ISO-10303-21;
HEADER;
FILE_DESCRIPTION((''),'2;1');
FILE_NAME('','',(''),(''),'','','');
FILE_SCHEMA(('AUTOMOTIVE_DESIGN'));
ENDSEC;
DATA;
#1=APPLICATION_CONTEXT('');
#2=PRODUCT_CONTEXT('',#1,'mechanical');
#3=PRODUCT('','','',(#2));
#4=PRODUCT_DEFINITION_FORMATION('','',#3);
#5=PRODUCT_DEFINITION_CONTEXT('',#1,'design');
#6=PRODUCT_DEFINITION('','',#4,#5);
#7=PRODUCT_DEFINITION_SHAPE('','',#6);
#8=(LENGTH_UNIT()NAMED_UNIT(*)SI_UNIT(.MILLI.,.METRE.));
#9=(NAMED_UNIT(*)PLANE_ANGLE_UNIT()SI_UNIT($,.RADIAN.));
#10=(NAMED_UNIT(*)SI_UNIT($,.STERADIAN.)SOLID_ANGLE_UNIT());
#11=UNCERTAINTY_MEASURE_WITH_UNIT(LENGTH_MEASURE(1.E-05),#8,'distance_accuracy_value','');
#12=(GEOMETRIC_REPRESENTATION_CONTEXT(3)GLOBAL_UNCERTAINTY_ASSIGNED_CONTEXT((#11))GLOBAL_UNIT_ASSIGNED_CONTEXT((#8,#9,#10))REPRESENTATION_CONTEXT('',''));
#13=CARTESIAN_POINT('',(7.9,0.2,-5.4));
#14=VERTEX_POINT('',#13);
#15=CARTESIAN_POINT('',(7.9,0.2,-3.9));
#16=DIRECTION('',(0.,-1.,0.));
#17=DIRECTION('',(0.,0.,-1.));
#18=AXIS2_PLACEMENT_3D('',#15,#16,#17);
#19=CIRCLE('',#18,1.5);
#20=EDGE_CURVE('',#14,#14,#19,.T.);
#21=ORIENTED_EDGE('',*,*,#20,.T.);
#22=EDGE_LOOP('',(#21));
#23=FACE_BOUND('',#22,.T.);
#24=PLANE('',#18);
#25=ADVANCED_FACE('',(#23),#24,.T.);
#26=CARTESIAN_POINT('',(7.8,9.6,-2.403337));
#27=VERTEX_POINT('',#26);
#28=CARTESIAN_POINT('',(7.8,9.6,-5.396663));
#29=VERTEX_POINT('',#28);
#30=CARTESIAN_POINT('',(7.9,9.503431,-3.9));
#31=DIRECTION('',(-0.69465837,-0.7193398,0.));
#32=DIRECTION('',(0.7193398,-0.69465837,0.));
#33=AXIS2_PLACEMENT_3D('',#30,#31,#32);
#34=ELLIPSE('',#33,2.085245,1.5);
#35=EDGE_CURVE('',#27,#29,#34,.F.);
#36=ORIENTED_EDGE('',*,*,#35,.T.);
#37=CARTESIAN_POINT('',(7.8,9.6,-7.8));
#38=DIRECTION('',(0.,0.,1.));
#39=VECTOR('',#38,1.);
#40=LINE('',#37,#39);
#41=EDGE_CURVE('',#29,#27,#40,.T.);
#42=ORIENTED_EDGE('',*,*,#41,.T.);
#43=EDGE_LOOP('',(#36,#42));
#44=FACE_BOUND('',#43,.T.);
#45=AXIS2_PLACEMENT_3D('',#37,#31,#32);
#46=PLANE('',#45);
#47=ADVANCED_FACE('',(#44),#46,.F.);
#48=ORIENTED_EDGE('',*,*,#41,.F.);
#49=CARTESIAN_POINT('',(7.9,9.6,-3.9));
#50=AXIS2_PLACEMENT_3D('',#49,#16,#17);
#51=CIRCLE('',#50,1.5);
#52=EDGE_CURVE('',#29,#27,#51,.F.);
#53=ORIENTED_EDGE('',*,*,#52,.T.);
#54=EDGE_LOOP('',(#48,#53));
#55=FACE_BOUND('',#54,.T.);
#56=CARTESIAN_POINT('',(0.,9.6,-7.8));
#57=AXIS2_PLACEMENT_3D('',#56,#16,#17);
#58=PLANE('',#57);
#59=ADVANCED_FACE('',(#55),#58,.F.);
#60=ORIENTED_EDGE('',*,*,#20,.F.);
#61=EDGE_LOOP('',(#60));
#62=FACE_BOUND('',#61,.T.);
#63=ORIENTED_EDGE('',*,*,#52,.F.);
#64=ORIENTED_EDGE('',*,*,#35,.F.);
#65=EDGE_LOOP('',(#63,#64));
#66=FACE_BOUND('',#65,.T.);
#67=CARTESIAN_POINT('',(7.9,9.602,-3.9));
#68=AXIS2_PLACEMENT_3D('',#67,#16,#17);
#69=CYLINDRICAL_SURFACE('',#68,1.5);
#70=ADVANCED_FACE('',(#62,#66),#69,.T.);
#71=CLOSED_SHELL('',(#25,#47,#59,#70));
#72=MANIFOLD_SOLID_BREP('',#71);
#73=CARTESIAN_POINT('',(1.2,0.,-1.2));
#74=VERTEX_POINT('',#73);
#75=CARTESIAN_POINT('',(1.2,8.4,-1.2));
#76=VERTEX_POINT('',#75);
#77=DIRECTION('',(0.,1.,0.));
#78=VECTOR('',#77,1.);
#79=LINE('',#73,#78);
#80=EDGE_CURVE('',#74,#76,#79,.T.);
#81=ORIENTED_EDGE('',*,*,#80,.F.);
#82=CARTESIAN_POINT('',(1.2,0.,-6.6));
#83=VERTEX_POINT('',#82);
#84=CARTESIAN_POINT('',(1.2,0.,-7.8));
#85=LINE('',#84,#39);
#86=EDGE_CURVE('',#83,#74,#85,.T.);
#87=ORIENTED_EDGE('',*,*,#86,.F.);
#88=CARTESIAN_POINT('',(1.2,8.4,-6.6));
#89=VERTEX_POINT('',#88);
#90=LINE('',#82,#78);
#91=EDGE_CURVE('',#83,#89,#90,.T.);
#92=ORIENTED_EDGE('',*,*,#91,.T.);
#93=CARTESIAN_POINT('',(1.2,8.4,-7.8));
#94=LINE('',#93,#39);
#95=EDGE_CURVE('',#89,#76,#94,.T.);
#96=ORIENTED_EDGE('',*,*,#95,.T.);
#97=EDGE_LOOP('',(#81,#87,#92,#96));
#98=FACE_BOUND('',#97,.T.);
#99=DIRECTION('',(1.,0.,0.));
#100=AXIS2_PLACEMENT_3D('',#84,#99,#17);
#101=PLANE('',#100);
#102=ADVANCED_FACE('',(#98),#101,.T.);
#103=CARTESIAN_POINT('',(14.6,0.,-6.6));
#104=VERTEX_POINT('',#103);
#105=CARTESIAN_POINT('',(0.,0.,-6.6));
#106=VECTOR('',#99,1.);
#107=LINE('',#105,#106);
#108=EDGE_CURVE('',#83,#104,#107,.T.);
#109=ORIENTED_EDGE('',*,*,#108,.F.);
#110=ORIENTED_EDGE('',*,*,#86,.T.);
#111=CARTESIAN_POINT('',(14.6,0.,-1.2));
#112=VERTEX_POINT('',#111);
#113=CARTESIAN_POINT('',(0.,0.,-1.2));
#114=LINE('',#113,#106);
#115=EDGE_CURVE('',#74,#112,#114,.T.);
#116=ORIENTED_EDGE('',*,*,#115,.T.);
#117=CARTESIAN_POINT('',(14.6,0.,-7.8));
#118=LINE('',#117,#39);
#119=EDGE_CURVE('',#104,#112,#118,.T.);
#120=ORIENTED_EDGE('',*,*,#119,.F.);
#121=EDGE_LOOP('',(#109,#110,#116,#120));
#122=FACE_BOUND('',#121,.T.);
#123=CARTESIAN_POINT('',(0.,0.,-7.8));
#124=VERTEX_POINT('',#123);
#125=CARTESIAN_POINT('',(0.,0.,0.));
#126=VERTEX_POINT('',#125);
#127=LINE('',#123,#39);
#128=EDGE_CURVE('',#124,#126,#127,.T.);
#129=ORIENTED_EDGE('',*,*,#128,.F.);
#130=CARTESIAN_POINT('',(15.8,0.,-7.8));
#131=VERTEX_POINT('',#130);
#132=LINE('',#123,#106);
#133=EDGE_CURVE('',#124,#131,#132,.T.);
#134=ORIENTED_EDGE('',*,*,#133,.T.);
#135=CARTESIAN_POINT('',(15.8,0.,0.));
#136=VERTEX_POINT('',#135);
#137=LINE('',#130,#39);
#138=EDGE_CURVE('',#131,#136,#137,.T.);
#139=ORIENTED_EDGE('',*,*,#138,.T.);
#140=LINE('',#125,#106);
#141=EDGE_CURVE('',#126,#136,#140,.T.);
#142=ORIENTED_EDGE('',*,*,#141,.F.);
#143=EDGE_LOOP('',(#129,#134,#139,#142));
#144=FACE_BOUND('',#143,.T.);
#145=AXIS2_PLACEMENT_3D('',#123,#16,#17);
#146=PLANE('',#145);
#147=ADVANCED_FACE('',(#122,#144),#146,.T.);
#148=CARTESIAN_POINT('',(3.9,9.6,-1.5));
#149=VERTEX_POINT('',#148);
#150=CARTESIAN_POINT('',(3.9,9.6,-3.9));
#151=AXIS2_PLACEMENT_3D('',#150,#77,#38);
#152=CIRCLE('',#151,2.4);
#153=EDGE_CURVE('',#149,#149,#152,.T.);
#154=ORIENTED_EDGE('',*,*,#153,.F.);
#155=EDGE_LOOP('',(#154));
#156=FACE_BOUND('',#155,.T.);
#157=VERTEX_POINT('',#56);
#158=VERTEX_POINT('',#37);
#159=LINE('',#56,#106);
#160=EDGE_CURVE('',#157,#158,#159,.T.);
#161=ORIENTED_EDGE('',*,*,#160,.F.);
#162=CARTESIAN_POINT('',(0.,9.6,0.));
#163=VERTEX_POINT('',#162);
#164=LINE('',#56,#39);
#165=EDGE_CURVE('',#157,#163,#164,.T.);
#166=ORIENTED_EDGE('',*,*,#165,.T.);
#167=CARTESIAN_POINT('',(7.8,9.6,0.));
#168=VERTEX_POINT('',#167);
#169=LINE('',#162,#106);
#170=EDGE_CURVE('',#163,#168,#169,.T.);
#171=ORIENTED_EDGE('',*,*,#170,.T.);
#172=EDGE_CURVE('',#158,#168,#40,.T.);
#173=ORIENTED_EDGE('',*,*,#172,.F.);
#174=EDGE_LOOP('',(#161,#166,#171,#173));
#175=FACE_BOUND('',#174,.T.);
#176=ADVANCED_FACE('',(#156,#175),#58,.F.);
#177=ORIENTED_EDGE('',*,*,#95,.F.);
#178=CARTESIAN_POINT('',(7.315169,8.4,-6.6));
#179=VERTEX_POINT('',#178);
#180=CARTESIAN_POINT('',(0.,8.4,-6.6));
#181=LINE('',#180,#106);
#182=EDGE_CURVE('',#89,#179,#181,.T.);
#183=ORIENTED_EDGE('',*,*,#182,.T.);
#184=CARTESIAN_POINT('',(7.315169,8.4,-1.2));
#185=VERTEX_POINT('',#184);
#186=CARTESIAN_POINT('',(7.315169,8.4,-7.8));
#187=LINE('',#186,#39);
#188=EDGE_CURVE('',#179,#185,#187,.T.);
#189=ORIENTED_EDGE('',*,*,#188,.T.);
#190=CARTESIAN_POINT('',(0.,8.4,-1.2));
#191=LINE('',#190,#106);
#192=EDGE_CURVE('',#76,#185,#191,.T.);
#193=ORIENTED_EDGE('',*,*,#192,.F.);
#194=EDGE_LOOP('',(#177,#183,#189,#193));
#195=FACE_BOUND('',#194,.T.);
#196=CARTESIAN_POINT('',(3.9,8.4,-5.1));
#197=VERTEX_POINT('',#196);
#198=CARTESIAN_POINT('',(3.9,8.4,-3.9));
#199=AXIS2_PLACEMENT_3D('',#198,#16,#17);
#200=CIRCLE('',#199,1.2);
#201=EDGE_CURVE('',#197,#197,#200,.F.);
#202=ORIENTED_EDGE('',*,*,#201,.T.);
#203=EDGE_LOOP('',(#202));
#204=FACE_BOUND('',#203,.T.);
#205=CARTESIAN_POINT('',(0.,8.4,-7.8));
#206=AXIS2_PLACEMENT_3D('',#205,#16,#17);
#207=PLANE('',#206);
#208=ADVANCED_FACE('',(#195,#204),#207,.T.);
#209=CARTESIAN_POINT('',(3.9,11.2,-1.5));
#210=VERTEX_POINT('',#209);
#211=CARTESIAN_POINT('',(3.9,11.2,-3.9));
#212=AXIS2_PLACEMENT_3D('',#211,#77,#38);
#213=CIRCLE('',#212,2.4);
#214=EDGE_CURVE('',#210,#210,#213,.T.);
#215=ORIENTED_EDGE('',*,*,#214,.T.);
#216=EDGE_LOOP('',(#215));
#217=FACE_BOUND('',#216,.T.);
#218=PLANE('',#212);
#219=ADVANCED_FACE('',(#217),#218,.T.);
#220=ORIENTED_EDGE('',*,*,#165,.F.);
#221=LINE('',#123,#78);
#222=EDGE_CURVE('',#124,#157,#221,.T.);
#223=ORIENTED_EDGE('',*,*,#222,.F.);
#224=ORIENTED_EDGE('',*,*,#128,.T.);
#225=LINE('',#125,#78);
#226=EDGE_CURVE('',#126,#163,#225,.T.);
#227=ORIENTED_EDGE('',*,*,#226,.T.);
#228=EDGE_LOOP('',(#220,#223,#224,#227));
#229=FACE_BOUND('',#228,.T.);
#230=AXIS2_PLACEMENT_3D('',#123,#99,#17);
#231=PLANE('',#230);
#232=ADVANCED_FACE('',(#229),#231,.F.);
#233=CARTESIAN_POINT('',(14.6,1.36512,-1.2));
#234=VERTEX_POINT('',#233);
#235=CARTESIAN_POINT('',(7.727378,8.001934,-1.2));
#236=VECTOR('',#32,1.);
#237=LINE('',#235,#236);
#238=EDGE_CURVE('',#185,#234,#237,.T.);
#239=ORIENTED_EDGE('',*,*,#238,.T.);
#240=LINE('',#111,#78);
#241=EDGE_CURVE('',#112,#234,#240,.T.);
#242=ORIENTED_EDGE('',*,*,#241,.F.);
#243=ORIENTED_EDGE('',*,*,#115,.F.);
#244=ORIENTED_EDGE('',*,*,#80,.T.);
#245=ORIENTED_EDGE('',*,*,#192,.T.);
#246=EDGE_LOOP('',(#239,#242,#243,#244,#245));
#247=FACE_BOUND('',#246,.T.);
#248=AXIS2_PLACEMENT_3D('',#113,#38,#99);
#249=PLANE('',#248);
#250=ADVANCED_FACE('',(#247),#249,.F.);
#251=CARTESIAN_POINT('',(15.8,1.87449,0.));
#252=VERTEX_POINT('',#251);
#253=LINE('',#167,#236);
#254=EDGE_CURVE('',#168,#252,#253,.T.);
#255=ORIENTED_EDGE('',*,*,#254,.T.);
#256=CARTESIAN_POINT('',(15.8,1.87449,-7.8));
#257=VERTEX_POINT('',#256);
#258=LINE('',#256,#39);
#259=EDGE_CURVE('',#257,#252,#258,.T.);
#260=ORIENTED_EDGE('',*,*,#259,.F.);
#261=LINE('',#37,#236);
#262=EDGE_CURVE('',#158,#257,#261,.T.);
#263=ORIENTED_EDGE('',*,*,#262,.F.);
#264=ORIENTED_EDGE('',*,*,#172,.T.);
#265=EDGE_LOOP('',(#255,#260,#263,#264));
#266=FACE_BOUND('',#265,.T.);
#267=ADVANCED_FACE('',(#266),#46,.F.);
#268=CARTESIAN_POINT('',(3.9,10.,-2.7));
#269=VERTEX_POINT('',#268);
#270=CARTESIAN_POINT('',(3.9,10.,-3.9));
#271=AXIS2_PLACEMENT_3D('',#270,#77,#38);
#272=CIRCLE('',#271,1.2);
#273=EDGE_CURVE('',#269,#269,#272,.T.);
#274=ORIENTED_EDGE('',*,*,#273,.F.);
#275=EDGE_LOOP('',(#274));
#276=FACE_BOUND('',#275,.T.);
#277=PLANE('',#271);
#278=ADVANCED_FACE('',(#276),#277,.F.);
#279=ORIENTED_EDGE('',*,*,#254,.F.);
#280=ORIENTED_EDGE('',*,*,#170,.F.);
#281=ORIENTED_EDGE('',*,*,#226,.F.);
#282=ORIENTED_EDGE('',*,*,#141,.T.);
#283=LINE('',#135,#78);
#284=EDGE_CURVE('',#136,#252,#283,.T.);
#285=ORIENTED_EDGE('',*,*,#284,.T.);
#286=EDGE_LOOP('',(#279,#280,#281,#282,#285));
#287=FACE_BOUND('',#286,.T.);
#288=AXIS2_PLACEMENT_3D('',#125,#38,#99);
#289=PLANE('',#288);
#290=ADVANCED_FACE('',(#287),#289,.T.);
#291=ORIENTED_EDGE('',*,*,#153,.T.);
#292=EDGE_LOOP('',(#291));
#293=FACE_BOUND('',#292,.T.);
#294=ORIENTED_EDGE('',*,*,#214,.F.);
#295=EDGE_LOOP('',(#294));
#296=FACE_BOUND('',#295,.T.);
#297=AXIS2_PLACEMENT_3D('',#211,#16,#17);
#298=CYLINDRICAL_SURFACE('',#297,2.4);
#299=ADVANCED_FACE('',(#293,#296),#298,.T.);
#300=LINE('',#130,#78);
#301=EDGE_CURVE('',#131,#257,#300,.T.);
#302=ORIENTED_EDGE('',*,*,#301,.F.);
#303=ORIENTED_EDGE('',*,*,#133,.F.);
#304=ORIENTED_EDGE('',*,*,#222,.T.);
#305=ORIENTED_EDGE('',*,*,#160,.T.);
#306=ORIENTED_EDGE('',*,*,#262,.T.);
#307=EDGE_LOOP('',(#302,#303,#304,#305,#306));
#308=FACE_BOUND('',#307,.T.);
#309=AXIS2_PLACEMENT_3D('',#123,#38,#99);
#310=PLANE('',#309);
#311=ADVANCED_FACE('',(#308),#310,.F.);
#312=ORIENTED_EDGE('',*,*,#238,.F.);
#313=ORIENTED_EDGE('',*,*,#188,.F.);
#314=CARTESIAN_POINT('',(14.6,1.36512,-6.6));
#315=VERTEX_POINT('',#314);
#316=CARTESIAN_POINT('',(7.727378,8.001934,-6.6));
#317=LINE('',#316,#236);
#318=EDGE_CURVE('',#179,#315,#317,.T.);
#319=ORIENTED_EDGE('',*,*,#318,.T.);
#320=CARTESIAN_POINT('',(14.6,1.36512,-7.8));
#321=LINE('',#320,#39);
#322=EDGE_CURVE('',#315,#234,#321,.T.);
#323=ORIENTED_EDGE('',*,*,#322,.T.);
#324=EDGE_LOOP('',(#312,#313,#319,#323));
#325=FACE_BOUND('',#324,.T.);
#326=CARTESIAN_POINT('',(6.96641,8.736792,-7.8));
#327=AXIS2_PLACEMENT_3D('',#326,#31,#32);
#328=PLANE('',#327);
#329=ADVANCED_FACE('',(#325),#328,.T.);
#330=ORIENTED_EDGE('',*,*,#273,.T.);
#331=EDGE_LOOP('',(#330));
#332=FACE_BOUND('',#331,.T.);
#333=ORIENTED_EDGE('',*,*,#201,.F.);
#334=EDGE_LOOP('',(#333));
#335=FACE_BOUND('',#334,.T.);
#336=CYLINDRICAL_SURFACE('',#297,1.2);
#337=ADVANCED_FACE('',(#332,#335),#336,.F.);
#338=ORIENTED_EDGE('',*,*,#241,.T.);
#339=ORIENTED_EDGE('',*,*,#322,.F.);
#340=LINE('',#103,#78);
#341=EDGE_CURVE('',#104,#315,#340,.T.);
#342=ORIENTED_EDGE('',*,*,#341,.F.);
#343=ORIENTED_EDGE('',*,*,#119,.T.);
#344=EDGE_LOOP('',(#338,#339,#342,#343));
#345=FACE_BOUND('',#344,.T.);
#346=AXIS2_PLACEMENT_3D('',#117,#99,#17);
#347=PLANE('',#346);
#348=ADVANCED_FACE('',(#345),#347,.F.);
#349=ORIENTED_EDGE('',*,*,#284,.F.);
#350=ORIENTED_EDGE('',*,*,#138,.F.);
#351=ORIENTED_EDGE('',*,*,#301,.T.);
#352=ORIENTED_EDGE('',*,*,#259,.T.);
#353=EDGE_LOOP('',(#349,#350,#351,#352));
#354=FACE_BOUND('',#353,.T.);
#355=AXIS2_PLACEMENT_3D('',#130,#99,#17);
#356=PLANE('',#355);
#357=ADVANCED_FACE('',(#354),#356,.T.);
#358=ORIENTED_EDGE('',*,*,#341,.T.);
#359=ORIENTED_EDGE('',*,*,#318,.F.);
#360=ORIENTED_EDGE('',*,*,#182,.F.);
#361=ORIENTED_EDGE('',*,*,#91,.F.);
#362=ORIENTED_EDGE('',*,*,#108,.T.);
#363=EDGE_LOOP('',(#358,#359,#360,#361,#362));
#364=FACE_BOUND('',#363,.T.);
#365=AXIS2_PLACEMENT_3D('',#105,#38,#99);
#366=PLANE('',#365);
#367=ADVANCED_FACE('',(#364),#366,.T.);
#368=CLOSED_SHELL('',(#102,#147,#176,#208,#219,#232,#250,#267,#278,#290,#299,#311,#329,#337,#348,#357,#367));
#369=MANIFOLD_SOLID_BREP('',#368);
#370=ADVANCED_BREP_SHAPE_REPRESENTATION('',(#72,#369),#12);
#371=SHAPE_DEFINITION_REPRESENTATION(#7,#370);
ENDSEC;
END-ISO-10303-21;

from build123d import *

# Parameters (mm, degrees)
BOSS_EXTRUDE1_DEPTH       = 7.8
BOSS_EXTRUDE2_START       = -7.85489796
BOSS_EXTRUDE2_OUTLINE_R   = 1.5
BOSS_EXTRUDE2_DEPTH       = 7.85489796
BOSS_EXTRUDE2_START_2     = 8.05489796
BOSS_EXTRUDE2_2_OUTLINE_R = 1.5
BOSS_EXTRUDE2_2_DEPTH     = 1.54510204
BOSS_EXTRUDE2_START_3     = 12.323997373
BOSS_EXTRUDE2_3_OUTLINE_W = 6
BOSS_EXTRUDE2_3_OUTLINE_H = 6
BOSS_EXTRUDE2_3_DEPTH     = 1.676002627
SKETCH4_R                 = 2.4
BOSS_EXTRUDE3_DEPTH       = 1.6
SHELL1_T                  = -1.2


with BuildPart() as part:
    # Sketch1 → Boss-Extrude1 (new body)
    with BuildSketch(Plane.XY):
        Polygon((0, 9.6), (7.8, 9.6), (15.8, 1.874489802), (15.8, 0), (0, 0), align=None)
    extrude(amount=-BOSS_EXTRUDE1_DEPTH)

    # Sketch4 → Boss-Extrude3 (add)
    with BuildSketch(Plane(origin=(0, 9.6, 0), x_dir=(1, 0, 0), z_dir=(0, 1, 0))):
        with Locations(Location((3.9, 3.9, 0), (0, 0, 270))):
            Circle(SKETCH4_R)
    extrude(amount=BOSS_EXTRUDE3_DEPTH)

    # Shell1
    shell1_openings = [part.faces().sort_by_distance(p)[0] for p in [
        (7.9, 0, -3.9),
    ]]
    offset(amount=SHELL1_T, openings=shell1_openings, kind=Kind.INTERSECTION)


with BuildPart() as body_2:
    # Boss-Extrude2: read off the stored shape, not the designer's step
    # Boss-Extrude2 outline → Boss-Extrude2 (new body)
    with BuildSketch(Plane(origin=(0, 0.2, 0), x_dir=(-1, 0, 0), z_dir=(0, -1, 0)).offset(BOSS_EXTRUDE2_START)):
        with Locations((-7.9, 3.9)):
            Circle(BOSS_EXTRUDE2_OUTLINE_R)
    extrude(amount=BOSS_EXTRUDE2_DEPTH)

    # Boss-Extrude2 2 outline → Boss-Extrude2 2 (add)
    with BuildSketch(Plane(origin=(0, 0, 0), x_dir=(1, 0, 0), z_dir=(0, 1, 0)).offset(BOSS_EXTRUDE2_START_2)):
        with Locations((7.9, 3.9)):
            Circle(BOSS_EXTRUDE2_2_OUTLINE_R)
    extrude(amount=BOSS_EXTRUDE2_2_DEPTH)

    # Boss-Extrude2 3 outline → Boss-Extrude2 3 (cut)
    with BuildSketch(Plane(origin=(0, 0, 0), x_dir=(0.7193398003386496, -0.6946583704589989, 0), z_dir=(0.6946583704589988, 0.7193398003386497, 0)).offset(BOSS_EXTRUDE2_START_3)):
        with Locations((0, 4)):
            Rectangle(BOSS_EXTRUDE2_3_OUTLINE_W, BOSS_EXTRUDE2_3_OUTLINE_H)
    extrude(amount=BOSS_EXTRUDE2_3_DEPTH, mode=Mode.SUBTRACT)


solid = Compound([part.part, body_2.part])
